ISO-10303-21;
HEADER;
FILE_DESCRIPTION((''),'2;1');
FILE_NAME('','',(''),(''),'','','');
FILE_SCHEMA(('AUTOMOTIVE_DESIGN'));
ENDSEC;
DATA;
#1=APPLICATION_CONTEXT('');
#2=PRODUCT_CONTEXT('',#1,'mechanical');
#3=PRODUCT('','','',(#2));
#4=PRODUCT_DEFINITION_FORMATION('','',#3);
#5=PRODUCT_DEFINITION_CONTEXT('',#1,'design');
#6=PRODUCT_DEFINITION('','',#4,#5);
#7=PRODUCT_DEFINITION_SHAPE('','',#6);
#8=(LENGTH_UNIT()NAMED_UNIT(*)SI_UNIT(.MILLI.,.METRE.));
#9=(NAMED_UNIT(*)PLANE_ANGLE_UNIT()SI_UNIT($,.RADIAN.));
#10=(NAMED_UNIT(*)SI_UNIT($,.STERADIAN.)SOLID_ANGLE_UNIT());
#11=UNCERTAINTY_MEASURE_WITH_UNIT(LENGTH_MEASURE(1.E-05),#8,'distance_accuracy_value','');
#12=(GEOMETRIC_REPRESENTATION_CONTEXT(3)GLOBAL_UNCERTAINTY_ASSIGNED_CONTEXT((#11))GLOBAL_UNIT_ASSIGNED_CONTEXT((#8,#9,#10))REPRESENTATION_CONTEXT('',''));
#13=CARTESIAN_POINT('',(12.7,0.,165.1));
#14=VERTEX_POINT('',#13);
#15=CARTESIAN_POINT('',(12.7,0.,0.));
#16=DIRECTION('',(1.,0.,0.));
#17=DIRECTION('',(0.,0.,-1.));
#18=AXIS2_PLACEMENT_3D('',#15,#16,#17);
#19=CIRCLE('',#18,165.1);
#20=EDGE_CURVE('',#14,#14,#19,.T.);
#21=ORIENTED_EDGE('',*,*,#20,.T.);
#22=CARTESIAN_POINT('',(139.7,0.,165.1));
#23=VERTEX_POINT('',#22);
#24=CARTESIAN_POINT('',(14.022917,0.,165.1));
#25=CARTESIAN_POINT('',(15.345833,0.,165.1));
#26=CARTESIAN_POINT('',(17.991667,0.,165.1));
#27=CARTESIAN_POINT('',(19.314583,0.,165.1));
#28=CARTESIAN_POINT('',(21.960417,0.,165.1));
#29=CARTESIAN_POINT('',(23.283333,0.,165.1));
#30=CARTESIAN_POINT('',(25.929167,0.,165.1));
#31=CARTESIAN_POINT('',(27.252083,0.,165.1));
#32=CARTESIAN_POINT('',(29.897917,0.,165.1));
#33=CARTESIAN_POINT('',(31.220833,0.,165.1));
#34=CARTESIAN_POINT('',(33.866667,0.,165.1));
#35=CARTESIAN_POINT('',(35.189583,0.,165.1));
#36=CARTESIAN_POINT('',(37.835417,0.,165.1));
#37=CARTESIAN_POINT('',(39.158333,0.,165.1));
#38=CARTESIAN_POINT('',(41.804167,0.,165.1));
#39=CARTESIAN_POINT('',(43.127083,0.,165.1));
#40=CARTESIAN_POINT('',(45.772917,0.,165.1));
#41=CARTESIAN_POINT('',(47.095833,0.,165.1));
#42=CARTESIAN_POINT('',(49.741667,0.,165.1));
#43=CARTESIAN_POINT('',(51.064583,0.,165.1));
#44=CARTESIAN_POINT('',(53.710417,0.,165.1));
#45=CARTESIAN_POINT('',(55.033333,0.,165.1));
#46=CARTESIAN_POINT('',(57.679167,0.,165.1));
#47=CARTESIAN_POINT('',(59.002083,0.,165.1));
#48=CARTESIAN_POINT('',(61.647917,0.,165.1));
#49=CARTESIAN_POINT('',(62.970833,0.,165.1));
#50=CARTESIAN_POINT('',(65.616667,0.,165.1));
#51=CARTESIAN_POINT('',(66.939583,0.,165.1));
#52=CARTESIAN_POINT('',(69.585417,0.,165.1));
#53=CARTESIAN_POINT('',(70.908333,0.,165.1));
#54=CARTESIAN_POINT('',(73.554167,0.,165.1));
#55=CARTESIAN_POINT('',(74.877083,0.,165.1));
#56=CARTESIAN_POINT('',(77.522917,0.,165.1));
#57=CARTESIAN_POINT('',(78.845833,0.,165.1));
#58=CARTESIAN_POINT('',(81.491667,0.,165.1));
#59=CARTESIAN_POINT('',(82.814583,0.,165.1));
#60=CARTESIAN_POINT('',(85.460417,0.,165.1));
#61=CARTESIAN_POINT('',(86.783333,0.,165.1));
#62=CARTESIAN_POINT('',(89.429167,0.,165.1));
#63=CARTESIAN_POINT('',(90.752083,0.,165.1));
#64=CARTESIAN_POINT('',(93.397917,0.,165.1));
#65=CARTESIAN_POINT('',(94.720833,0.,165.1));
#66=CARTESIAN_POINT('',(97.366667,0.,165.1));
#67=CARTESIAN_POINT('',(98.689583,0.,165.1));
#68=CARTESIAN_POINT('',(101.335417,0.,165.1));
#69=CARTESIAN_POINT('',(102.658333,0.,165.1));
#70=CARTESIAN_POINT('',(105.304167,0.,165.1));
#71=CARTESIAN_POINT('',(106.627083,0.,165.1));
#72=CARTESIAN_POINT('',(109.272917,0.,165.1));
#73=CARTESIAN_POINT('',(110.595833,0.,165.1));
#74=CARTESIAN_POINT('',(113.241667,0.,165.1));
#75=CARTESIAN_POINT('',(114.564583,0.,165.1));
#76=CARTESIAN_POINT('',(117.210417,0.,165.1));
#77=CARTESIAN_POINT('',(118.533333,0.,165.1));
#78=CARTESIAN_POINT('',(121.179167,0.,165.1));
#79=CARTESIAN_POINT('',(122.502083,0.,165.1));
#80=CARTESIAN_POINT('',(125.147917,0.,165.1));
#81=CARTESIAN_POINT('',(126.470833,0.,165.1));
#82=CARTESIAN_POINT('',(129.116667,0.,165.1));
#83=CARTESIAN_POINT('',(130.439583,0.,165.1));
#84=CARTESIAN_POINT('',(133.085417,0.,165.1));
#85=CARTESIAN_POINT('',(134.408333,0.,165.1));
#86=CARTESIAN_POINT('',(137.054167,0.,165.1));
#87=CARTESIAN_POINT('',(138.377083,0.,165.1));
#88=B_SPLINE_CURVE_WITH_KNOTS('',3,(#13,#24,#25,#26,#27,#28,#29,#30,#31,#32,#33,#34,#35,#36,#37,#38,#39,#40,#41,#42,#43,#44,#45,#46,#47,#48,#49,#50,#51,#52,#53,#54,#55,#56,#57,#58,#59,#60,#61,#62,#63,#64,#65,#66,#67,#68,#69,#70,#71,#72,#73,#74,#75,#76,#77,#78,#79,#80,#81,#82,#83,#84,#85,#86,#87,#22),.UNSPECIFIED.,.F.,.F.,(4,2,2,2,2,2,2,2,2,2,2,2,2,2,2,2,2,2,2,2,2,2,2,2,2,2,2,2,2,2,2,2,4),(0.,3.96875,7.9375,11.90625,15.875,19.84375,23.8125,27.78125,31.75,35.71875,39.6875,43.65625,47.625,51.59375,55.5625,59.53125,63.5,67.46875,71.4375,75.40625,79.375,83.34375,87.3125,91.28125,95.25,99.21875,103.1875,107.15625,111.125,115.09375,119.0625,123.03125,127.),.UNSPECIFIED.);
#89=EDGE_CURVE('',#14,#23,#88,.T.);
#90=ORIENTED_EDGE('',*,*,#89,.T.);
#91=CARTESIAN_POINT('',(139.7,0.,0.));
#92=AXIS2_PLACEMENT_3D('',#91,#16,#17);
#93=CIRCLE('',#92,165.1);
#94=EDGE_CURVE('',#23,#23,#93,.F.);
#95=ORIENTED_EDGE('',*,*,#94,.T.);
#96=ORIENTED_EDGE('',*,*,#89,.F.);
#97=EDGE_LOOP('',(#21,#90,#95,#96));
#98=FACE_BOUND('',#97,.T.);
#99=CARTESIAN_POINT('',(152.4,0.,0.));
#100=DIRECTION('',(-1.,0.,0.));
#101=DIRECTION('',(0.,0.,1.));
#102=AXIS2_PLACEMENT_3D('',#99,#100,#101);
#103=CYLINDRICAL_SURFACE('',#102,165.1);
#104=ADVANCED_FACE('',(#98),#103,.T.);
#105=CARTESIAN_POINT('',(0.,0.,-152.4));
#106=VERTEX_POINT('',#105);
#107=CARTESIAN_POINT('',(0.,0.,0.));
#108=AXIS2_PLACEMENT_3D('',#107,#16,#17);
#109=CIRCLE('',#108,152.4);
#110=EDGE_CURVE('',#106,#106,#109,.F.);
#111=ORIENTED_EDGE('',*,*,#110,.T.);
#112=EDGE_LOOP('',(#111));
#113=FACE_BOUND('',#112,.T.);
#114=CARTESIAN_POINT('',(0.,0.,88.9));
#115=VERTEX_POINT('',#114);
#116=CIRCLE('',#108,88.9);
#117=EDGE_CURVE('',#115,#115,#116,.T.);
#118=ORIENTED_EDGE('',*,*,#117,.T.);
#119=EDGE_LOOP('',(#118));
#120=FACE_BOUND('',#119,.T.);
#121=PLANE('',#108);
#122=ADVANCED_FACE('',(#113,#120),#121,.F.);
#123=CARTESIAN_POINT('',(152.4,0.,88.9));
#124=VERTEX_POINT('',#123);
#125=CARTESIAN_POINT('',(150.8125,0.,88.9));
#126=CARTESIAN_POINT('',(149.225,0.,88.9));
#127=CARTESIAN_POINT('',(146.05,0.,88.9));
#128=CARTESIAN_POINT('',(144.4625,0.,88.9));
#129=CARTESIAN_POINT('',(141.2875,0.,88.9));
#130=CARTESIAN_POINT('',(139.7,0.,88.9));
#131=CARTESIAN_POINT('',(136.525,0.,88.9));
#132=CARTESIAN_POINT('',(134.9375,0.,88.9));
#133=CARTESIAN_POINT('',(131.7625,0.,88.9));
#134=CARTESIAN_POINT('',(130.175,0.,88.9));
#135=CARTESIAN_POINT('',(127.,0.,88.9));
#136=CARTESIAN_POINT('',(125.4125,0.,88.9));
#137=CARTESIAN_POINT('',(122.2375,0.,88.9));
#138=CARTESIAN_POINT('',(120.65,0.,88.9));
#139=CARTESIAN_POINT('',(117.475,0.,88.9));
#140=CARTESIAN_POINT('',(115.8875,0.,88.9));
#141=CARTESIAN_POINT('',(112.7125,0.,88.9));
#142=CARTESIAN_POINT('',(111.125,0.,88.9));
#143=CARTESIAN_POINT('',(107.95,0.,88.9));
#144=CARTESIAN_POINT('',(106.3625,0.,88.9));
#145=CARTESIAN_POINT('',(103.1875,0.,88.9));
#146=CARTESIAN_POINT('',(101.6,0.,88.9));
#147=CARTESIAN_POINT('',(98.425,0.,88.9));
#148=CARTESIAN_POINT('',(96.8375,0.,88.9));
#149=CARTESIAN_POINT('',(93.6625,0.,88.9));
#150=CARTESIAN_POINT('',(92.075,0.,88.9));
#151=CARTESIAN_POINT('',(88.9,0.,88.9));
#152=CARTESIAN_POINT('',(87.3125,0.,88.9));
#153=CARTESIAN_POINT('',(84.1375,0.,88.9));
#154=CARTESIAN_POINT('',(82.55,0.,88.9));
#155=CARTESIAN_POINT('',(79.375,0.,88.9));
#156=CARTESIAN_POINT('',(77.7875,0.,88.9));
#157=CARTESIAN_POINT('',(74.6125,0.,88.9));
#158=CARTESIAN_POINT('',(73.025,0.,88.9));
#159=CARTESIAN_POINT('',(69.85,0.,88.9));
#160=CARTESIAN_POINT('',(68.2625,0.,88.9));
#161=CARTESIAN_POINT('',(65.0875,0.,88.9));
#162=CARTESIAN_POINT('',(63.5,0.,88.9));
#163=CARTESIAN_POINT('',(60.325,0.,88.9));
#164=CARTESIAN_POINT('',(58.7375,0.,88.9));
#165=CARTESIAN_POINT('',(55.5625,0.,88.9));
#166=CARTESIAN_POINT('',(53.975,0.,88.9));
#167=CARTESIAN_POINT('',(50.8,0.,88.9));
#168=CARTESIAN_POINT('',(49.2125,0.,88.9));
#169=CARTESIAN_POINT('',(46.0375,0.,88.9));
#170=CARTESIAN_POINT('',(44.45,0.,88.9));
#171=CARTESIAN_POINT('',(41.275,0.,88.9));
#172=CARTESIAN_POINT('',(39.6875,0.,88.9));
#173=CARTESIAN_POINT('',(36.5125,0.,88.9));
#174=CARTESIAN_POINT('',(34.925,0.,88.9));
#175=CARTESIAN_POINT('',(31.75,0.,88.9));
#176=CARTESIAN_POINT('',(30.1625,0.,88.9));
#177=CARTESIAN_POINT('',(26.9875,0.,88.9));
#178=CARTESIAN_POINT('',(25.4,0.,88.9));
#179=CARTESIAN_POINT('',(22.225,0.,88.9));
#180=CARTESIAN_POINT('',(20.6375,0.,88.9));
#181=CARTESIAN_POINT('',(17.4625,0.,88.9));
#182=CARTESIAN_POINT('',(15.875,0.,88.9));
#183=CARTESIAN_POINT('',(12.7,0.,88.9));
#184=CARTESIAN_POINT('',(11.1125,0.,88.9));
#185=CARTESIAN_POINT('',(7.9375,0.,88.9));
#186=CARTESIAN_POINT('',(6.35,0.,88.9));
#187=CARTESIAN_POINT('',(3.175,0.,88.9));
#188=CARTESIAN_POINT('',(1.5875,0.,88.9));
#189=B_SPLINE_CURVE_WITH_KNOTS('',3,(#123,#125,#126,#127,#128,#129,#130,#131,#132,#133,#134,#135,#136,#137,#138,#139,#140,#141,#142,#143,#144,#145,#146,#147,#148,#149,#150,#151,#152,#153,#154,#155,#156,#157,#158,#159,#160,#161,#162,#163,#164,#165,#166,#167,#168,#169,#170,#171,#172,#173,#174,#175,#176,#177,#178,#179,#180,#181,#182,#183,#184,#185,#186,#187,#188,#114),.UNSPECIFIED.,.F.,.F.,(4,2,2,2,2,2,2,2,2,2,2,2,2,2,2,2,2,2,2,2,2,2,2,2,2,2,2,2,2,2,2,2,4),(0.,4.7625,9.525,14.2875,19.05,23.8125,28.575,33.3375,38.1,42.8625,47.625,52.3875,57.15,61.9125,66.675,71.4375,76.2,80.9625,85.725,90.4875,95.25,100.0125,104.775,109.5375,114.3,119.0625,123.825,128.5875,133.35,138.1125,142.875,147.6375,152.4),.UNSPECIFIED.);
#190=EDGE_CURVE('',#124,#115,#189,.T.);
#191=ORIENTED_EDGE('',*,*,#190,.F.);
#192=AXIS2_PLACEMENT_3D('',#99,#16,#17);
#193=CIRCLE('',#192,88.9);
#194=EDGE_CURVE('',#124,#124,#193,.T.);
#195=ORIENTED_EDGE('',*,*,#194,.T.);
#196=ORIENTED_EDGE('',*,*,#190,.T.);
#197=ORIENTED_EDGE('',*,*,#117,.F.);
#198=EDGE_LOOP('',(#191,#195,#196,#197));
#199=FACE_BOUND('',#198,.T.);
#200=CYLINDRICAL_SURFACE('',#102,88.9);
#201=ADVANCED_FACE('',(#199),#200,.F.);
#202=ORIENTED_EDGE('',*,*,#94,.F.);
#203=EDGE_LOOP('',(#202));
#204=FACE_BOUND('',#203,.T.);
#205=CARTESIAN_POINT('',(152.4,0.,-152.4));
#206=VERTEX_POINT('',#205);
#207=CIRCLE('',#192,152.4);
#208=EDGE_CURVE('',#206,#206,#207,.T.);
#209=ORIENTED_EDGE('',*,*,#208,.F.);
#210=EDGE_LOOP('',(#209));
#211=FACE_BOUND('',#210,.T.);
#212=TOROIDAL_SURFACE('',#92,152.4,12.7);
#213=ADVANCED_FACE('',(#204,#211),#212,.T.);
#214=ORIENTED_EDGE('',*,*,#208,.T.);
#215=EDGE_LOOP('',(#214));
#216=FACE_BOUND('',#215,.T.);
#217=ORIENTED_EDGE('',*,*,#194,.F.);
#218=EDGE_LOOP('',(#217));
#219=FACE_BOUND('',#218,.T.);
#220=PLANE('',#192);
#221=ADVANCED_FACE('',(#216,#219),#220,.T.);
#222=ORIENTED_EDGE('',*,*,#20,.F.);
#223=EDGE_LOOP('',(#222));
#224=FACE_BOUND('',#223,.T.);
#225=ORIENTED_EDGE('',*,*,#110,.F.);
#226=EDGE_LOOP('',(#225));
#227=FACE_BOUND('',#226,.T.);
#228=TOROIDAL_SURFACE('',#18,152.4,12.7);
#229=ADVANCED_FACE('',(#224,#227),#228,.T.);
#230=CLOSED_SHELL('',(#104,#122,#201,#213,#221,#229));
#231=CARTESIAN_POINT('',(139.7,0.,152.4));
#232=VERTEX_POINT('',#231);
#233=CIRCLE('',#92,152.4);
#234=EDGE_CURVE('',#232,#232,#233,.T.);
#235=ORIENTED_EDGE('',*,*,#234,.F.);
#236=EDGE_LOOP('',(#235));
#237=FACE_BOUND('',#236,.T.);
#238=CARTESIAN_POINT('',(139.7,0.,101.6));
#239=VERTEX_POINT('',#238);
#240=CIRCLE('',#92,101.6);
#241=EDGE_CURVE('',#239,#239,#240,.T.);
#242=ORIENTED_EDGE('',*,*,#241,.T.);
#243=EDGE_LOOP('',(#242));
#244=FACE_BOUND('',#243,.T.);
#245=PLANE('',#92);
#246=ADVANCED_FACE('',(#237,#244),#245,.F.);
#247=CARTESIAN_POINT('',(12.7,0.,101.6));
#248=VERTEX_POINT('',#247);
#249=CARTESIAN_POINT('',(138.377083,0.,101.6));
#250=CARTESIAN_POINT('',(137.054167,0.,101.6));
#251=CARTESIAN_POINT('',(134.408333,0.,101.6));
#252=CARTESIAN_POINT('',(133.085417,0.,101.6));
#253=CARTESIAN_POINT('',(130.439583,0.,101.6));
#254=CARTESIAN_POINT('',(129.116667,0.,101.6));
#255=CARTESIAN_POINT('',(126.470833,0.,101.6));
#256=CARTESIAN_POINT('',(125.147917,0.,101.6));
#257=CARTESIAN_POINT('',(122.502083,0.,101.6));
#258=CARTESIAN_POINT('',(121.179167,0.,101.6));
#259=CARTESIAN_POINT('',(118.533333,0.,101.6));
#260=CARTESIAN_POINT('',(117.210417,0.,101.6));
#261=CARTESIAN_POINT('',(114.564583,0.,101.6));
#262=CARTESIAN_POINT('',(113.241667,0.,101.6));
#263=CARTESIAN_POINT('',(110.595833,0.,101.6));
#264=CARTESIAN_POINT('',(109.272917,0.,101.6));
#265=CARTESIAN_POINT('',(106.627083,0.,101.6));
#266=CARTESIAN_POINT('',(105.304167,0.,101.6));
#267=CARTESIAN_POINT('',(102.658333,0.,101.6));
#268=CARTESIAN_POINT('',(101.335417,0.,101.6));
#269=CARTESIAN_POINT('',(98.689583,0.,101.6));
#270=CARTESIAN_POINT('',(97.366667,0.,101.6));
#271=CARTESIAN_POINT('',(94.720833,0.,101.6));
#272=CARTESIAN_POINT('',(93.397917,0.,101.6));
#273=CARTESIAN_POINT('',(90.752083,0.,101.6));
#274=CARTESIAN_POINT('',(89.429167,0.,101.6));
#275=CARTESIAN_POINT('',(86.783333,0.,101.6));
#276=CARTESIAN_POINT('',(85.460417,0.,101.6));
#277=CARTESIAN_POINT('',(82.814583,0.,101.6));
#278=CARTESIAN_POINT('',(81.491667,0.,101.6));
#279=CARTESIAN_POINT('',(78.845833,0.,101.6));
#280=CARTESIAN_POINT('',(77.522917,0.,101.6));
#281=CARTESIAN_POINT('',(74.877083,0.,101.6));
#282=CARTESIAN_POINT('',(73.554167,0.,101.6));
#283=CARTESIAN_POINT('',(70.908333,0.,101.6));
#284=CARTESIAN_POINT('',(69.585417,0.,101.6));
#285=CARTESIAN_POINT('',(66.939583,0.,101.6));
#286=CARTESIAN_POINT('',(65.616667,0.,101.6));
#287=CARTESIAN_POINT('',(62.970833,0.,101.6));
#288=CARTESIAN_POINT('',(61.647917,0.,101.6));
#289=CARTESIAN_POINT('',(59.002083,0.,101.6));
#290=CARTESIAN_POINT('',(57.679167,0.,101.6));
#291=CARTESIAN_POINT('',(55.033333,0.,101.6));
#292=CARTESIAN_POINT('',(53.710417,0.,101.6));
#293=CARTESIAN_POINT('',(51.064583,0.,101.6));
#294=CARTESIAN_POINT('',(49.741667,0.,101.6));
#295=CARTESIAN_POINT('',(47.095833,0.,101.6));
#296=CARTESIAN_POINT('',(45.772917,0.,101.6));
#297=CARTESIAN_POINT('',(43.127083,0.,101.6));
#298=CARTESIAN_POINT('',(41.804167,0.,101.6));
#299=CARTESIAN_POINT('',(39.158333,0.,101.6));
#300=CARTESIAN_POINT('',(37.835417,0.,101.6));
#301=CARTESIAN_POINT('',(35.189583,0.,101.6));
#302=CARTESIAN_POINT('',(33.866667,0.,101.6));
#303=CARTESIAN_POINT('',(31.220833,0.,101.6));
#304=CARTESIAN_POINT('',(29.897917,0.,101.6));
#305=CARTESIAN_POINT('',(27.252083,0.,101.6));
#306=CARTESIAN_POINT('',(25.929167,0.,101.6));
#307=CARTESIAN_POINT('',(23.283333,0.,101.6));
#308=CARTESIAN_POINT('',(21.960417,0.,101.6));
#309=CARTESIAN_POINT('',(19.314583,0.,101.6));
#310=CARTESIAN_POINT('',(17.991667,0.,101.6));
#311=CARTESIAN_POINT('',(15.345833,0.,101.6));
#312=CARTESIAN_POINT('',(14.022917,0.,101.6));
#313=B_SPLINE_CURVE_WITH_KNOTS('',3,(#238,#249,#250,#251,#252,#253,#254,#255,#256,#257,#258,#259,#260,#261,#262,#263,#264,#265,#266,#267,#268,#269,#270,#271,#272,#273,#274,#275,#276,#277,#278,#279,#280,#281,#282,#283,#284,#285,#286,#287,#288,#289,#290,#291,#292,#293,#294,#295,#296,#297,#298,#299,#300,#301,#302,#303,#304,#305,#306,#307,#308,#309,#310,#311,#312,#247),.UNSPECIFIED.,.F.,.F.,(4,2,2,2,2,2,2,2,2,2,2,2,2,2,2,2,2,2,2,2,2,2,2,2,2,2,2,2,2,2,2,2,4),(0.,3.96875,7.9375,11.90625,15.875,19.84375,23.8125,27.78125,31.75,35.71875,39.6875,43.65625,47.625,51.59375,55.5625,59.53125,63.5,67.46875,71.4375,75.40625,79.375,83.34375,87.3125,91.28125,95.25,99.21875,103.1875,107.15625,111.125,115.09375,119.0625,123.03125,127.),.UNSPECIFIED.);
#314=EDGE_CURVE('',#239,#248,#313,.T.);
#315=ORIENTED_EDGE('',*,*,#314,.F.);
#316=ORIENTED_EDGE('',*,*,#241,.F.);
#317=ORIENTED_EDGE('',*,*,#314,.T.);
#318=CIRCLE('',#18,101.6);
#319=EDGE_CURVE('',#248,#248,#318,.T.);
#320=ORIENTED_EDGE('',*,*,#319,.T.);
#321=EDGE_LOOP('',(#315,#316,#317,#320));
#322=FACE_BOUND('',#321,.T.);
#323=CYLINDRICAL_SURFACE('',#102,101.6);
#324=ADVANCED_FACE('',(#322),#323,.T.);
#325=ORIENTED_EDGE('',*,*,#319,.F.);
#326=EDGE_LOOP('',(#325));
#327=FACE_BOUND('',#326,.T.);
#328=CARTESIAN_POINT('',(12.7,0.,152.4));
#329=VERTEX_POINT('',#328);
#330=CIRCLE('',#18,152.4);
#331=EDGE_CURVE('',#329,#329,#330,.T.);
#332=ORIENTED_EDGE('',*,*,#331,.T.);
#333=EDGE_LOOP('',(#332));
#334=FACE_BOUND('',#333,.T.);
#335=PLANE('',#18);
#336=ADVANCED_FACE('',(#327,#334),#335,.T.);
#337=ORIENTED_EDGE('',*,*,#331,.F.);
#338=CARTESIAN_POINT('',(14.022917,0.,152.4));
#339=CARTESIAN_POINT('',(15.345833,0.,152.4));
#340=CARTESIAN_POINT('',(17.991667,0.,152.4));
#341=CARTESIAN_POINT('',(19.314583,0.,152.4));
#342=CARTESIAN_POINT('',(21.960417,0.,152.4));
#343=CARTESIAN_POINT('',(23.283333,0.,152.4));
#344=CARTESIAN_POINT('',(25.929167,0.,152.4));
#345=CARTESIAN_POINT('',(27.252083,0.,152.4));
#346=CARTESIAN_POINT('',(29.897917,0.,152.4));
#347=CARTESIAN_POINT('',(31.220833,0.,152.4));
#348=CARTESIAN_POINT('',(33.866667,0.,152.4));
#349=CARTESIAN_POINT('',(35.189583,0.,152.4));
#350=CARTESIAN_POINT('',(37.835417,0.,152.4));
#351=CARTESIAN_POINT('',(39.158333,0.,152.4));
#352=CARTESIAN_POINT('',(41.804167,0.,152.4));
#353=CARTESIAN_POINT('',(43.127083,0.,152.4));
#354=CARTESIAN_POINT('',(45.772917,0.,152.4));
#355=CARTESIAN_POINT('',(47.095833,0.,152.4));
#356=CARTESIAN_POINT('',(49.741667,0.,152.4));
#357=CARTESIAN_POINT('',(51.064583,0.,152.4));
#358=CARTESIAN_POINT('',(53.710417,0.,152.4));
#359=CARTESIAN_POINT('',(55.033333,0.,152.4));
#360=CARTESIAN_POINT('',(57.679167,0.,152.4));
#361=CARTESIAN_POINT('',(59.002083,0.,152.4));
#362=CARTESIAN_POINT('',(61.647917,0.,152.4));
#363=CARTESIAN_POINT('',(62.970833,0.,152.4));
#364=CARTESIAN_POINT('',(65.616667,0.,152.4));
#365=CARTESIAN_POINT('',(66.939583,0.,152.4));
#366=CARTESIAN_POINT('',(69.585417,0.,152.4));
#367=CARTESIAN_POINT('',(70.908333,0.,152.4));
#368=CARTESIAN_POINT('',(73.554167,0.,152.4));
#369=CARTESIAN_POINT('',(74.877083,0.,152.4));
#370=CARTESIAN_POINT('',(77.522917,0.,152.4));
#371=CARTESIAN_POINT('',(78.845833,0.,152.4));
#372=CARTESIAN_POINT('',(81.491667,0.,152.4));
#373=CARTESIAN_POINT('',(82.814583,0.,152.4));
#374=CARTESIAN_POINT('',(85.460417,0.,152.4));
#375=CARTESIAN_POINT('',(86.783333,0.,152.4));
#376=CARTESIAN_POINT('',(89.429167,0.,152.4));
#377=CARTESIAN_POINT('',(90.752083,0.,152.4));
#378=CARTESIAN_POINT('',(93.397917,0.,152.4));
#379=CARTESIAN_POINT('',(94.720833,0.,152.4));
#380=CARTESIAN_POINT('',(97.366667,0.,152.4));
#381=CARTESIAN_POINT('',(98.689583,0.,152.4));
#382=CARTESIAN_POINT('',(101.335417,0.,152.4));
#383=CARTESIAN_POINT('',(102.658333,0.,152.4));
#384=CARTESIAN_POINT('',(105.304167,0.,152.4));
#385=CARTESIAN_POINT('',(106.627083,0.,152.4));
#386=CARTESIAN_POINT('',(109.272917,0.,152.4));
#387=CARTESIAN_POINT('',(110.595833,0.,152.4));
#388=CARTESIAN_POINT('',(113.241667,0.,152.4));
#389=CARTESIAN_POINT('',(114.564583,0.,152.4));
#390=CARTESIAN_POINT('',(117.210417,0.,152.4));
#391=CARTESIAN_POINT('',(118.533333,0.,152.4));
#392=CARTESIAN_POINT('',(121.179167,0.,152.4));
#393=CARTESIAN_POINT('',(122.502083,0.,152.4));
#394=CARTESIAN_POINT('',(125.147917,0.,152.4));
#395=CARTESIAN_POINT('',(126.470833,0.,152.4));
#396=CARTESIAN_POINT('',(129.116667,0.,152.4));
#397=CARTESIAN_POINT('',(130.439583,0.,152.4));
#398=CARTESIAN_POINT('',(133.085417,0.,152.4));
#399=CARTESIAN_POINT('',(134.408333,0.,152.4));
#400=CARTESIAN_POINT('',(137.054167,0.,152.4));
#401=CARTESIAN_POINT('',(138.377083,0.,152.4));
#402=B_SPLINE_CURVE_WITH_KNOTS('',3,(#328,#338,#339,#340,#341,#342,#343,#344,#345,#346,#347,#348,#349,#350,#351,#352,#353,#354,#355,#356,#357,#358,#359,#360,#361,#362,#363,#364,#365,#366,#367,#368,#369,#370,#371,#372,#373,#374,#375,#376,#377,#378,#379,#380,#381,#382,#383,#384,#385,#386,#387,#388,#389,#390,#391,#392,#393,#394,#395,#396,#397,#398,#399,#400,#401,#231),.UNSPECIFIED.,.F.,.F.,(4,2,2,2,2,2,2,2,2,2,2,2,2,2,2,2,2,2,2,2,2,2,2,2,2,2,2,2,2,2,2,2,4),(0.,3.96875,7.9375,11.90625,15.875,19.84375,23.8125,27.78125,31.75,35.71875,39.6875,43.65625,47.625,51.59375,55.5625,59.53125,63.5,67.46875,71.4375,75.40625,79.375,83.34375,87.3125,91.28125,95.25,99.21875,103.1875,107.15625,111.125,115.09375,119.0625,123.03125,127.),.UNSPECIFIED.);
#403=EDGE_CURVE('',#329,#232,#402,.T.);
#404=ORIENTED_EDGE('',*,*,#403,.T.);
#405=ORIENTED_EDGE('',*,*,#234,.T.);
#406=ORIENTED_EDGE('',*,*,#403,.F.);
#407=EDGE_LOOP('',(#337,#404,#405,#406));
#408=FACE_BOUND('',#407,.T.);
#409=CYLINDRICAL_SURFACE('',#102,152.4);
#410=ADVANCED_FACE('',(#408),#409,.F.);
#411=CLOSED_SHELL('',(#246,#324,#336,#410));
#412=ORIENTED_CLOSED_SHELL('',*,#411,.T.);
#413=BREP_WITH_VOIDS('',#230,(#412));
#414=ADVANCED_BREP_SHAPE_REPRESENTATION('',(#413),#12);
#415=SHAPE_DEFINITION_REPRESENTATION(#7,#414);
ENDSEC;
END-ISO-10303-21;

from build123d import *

# Parameters (mm, degrees)
SKETCH1_R           = 165.1
SKETCH1_R_2         = 88.9
BOSS_EXTRUDE1_DEPTH = 152.4
FILLET1_R           = 12.7
SHELL2_START        = 12.7
SHELL2_OUTLINE_R    = 152.4
SHELL2_OUTLINE_R_2  = 101.6
SHELL2_DEPTH        = 127


# Read off the part's stored shape, not the designer's step: Shell2
with BuildPart() as part:
    # Sketch1 → Boss-Extrude1 (new body)
    with BuildSketch(Plane(origin=(0, 0, 0), x_dir=(0, 0, -1), z_dir=(1, 0, 0))):
        with Locations(Location((0, 0, 0), (0, 0, 180))):
            Circle(SKETCH1_R)
        with Locations(Location((0, 0, 0), (0, 0, 180))):
            Circle(SKETCH1_R_2, mode=Mode.SUBTRACT)
    extrude(amount=BOSS_EXTRUDE1_DEPTH)

    # Fillet1
    fillet1_edges = [part.edges().sort_by_distance(p)[0] for p in [
        (0, 0, -165.1),
        (152.4, 0, -165.1),
    ]]
    fillet(fillet1_edges, radius=FILLET1_R)

    # Shell2 outline → Shell2 (cut)
    with BuildSketch(Plane.YZ.offset(SHELL2_START)):
        Circle(SHELL2_OUTLINE_R)
        Circle(SHELL2_OUTLINE_R_2, mode=Mode.SUBTRACT)
    extrude(amount=SHELL2_DEPTH, mode=Mode.SUBTRACT)


solid = part.part
